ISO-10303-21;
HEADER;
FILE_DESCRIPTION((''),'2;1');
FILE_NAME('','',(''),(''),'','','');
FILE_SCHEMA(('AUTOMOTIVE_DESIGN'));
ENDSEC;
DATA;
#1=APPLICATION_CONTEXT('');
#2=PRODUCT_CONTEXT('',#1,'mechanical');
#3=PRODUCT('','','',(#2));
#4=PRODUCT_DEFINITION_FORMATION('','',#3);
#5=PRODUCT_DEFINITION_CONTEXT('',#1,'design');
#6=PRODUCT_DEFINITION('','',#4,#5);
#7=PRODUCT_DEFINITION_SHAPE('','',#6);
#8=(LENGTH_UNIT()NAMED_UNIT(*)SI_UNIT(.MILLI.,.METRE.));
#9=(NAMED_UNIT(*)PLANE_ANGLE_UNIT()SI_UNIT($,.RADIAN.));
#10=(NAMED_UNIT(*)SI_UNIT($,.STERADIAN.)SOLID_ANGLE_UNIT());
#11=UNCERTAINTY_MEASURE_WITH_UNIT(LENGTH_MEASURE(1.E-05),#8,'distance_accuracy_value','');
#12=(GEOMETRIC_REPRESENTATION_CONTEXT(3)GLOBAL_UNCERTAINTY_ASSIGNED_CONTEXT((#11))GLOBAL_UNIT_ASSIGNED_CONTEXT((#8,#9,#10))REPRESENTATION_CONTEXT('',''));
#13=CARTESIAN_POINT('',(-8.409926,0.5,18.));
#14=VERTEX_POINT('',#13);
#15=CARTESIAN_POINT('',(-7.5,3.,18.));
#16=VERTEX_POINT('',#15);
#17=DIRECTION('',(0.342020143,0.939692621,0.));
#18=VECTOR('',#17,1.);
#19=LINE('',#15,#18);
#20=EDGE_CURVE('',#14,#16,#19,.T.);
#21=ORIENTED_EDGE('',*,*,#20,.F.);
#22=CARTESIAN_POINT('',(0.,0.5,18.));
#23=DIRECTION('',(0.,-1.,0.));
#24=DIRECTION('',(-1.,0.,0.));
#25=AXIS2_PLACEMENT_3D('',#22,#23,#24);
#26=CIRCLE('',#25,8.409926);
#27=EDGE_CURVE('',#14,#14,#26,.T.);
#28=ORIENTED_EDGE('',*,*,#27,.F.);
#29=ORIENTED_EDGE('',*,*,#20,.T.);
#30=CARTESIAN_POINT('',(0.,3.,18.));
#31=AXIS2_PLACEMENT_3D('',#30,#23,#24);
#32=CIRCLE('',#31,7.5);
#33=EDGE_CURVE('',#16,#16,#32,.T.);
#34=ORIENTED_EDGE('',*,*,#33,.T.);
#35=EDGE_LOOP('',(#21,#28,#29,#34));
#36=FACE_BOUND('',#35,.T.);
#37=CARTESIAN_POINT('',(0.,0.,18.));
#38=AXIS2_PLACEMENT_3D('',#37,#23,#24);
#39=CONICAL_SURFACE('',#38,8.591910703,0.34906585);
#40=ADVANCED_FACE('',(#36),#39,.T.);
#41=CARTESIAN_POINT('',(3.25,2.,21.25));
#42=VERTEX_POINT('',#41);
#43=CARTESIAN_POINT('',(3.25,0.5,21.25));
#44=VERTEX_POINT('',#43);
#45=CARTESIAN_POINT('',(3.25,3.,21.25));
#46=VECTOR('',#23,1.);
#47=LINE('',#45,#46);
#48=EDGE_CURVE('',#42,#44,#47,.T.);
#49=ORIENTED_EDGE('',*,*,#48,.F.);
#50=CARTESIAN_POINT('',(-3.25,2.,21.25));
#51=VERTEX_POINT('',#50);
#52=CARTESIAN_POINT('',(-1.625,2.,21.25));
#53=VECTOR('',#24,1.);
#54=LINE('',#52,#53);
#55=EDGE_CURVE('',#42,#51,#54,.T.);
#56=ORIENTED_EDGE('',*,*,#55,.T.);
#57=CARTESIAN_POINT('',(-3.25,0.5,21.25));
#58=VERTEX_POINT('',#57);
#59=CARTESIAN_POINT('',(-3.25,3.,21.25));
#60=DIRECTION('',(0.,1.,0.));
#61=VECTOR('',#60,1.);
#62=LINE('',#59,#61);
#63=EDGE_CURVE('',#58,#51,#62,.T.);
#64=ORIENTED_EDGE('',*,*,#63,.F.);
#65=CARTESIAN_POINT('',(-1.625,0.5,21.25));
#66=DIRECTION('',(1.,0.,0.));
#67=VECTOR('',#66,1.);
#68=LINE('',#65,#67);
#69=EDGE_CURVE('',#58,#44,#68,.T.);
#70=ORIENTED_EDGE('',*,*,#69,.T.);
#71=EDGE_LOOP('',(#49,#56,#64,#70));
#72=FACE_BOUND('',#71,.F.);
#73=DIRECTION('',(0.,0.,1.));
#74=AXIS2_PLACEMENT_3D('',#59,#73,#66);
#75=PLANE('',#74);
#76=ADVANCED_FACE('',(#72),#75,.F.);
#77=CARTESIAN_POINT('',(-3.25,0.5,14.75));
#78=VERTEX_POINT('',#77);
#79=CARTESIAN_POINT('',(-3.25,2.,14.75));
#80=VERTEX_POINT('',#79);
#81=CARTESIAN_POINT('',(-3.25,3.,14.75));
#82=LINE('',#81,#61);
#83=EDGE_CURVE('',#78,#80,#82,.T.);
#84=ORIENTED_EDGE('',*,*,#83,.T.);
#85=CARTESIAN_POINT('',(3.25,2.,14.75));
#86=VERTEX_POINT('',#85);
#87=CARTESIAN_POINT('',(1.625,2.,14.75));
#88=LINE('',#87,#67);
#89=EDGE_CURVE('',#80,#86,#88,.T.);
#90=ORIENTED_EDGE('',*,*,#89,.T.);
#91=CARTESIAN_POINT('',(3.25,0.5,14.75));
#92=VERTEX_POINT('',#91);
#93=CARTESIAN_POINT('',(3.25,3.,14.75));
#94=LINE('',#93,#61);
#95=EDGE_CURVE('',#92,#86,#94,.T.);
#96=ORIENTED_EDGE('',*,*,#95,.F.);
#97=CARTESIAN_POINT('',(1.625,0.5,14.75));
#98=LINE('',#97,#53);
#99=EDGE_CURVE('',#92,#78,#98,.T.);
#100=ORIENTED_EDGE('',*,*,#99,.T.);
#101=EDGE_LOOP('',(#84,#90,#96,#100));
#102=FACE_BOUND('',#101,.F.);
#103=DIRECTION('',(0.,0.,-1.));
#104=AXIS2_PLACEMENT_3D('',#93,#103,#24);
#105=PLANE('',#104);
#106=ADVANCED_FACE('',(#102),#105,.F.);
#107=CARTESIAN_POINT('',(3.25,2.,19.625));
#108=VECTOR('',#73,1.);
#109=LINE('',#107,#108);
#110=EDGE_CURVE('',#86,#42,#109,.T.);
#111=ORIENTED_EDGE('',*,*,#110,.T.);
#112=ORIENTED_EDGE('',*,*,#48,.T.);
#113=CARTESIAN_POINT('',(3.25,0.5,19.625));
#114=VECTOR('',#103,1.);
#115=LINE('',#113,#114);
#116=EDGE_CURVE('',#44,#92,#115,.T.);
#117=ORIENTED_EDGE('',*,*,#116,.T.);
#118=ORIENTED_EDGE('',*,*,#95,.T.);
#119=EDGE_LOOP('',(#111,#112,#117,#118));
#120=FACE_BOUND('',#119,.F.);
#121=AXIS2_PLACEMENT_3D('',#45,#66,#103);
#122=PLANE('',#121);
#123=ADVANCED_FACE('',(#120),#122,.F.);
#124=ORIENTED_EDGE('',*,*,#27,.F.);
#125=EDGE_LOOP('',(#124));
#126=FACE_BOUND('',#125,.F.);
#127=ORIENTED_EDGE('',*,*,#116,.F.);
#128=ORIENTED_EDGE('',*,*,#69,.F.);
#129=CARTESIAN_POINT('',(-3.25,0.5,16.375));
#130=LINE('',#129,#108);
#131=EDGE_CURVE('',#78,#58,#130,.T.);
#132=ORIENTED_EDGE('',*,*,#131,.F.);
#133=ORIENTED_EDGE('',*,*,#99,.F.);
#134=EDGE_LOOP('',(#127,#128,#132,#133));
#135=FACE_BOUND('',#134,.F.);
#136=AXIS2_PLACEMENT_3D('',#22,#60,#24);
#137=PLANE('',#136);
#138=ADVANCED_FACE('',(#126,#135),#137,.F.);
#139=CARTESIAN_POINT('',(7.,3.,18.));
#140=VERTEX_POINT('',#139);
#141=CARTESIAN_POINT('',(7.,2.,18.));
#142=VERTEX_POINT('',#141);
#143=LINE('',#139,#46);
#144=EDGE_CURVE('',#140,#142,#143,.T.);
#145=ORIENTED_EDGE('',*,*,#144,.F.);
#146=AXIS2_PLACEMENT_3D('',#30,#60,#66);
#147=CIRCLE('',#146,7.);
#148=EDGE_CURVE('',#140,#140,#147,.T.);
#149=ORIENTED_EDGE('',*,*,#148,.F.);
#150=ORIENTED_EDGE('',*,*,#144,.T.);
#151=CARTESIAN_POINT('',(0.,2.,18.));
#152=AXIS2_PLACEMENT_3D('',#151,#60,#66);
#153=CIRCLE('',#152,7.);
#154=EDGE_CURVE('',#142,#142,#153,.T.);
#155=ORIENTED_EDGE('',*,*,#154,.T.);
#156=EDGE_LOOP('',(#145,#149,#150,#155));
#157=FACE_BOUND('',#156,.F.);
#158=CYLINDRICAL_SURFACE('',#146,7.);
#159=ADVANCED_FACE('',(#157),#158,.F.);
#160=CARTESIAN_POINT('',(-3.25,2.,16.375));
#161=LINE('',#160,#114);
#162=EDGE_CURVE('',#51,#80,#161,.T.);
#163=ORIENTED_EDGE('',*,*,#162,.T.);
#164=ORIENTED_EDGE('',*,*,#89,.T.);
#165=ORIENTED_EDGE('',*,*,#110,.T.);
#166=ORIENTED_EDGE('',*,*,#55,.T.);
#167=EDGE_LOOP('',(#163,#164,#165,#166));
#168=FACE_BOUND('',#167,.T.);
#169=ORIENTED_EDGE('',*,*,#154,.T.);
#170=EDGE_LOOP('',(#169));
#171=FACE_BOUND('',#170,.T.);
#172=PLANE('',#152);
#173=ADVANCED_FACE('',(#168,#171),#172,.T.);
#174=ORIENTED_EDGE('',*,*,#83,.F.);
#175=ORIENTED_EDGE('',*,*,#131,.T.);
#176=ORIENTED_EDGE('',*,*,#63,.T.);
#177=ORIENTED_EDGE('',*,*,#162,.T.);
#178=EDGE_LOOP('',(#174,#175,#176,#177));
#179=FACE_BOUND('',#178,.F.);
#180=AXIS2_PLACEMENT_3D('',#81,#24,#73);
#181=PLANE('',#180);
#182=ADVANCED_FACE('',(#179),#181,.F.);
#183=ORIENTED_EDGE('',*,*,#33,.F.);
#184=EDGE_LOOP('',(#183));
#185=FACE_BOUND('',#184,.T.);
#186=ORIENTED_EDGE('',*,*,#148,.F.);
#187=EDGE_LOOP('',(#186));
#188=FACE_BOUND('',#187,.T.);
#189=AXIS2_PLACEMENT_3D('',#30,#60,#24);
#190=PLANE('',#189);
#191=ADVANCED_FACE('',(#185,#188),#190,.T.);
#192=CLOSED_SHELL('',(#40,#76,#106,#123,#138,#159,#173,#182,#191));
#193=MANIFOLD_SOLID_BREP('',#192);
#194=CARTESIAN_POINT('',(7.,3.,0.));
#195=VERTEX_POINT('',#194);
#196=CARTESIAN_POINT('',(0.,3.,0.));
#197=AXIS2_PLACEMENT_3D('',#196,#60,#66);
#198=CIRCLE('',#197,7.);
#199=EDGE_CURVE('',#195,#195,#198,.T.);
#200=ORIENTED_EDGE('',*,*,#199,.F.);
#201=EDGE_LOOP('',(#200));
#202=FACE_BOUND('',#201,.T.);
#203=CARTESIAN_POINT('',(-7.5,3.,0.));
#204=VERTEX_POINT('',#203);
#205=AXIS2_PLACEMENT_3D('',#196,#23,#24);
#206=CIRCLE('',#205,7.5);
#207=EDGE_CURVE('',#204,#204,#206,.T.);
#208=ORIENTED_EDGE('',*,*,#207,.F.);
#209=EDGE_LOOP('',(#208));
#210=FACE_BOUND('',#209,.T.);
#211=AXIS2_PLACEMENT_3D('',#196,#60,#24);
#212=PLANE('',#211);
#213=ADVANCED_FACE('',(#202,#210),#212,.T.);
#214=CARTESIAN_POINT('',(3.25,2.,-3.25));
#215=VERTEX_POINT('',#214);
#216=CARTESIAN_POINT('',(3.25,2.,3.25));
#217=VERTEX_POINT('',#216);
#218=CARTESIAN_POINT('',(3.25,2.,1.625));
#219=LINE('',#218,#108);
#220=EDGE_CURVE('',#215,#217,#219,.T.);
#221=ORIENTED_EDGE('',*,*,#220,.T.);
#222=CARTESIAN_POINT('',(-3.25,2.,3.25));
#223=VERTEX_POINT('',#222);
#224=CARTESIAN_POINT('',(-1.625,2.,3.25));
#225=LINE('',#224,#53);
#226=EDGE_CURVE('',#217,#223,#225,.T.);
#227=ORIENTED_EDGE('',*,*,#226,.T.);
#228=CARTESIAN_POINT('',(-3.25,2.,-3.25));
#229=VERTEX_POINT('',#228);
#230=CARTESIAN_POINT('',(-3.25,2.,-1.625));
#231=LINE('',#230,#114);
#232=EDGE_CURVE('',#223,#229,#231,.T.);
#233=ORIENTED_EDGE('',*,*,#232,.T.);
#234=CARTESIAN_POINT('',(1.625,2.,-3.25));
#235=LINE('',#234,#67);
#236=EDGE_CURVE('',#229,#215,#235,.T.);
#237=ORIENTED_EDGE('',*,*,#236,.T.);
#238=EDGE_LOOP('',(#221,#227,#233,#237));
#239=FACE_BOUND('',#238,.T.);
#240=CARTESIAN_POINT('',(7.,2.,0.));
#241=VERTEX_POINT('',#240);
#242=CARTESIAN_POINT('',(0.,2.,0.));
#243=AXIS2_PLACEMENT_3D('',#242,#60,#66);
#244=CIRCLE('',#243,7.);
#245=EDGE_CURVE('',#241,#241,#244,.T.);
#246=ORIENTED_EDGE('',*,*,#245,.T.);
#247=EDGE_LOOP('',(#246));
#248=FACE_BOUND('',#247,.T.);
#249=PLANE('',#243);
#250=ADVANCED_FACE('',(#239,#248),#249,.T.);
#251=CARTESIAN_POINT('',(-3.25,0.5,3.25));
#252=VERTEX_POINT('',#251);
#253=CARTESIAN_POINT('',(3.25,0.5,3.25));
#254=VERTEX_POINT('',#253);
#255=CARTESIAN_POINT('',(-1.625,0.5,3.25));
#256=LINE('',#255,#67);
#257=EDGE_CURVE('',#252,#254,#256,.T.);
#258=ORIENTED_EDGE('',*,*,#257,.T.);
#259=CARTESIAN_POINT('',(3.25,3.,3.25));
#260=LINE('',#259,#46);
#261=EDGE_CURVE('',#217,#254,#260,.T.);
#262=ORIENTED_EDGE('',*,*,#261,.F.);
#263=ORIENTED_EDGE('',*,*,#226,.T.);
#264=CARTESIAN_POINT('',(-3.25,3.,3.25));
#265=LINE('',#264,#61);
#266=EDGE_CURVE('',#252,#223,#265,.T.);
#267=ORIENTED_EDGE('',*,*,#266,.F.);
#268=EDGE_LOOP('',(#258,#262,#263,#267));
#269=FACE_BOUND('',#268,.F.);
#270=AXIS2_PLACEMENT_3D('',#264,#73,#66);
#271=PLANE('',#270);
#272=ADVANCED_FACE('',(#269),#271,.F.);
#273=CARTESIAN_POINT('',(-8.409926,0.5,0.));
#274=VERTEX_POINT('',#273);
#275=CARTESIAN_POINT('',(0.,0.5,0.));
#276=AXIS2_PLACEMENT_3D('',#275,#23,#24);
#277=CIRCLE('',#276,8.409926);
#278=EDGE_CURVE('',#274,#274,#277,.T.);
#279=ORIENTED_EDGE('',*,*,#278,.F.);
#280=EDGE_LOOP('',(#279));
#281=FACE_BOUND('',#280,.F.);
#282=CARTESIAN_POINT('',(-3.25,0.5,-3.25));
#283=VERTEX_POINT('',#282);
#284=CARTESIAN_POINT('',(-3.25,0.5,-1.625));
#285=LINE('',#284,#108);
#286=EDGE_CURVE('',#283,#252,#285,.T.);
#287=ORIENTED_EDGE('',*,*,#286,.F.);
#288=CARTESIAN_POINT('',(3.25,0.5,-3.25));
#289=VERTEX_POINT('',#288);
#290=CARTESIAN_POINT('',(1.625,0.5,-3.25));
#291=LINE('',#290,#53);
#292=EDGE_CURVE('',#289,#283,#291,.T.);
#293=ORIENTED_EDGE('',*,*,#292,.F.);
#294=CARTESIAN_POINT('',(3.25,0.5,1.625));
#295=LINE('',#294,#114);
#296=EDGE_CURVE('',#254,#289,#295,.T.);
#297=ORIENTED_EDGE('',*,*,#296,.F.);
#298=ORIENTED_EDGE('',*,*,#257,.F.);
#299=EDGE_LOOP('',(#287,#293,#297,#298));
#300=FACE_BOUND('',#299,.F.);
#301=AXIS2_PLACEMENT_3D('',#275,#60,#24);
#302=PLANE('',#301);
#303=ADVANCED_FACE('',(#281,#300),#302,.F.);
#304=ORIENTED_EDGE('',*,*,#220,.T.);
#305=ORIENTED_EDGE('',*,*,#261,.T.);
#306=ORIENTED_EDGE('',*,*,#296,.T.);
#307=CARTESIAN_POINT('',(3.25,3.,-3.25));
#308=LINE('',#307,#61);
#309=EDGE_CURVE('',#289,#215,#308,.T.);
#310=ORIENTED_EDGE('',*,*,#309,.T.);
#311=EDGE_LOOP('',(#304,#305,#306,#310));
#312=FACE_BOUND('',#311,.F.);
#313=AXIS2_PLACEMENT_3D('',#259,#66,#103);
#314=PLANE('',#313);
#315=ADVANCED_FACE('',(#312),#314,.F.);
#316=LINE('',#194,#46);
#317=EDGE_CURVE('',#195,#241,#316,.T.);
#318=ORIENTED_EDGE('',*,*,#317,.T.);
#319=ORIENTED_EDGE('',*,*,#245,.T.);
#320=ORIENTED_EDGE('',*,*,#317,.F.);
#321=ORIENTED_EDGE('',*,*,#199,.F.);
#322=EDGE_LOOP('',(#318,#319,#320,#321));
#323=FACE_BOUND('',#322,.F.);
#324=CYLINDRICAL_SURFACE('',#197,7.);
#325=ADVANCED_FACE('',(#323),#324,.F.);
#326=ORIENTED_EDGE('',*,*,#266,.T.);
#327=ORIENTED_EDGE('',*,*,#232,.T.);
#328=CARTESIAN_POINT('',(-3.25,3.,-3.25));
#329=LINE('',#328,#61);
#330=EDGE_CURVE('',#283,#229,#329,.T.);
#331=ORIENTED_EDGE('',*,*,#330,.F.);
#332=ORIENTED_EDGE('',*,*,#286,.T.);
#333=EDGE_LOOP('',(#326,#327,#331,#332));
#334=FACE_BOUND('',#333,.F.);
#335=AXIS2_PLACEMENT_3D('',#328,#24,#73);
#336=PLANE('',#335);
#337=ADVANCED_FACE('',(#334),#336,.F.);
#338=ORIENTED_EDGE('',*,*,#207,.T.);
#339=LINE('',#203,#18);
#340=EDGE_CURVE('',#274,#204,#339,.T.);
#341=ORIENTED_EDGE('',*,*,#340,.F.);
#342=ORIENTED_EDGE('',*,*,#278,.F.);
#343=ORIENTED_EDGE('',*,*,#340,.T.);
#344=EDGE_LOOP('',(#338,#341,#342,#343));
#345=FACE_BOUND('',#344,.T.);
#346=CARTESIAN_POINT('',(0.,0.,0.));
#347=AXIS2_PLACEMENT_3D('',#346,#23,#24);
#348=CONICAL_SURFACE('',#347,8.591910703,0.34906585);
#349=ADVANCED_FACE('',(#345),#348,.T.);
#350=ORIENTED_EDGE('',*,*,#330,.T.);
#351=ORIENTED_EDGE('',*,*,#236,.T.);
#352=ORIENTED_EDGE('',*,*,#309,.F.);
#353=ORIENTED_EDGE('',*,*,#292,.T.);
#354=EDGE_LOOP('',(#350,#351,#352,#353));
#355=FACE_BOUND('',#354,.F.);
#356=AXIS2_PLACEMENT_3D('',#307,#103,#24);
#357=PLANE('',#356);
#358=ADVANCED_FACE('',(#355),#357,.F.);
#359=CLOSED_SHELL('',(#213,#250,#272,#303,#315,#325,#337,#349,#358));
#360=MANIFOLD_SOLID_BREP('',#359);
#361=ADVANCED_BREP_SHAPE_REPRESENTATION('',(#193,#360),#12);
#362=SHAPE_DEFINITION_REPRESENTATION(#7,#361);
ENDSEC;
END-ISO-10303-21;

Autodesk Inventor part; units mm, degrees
ref_plane "YZ Plane" through (0, 0, 0) normal (1, 0, 0) x (0, 1, 0)
ref_plane "XZ Plane" through (0, 0, 0) normal (0, 1, 0) x (-1, 0, 0)
ref_plane "XY Plane" through (0, 0, 0) normal (0, 0, 1) x (1, 0, 0)
sketch "Sketch1" plane through (0, 0, 0) normal (0, 1, 0) x (-1, 0, 0)
  circle A0 centre (0, 0) radius 7
  circle A1 centre (0, 0) radius 7.5
  dimension "d0" = 14
  dimension "d1" = 15
extrude "Extrusion1" add sketch "Sketch1" along normal blind 3 contours A0 | A1
sketch "Sketch2" plane through (0, 3, 0) normal (0, 1, 0) x (1, 0, 0)
  line L0 (3.25, 3.25) -> (-3.25, 3.25)
  line L1 (-3.25, 3.25) -> (-3.25, -3.25)
  line L2 (-3.25, -3.25) -> (3.25, -3.25)
  line L3 (3.25, -3.25) -> (3.25, 3.25)
  line L4 (3.25, 3.25) -> (-3.25, -3.25) construction
  line L5 (-3.25, 3.25) -> (3.25, -3.25) construction
  point P0 (0, 0)
  dimension "d4" = 6.5
  dimension "d5" = 6.5
extrude "Extrusion2" cut sketch "Sketch2" against normal through all
sketch "Sketch3" plane through (0, 3, 0) normal (0, 1, 0) x (1, 0, 0)
  circle A0 centre (0, 0) radius 7
  dimension "d8" = 14
extrude "Extrusion3" cut sketch "Sketch3" against normal blind 1
thicken "Thicken1" operation add thickness 0.5 both sides no extend neighbours yes toward (0, 1, 0) faces at (-4.6667, 0, 0)
draft "FaceDraft1" angle 20 pull direction (0, 1, 0) faces at (-7.4757, 1.3333, 0.6035) fixed edges at (7.5, 3, 0)
pattern_linear "Rectangular Pattern1" count 2 spacing 18 along (0, 0, 1)
properties part number "spool_holder_washer"
